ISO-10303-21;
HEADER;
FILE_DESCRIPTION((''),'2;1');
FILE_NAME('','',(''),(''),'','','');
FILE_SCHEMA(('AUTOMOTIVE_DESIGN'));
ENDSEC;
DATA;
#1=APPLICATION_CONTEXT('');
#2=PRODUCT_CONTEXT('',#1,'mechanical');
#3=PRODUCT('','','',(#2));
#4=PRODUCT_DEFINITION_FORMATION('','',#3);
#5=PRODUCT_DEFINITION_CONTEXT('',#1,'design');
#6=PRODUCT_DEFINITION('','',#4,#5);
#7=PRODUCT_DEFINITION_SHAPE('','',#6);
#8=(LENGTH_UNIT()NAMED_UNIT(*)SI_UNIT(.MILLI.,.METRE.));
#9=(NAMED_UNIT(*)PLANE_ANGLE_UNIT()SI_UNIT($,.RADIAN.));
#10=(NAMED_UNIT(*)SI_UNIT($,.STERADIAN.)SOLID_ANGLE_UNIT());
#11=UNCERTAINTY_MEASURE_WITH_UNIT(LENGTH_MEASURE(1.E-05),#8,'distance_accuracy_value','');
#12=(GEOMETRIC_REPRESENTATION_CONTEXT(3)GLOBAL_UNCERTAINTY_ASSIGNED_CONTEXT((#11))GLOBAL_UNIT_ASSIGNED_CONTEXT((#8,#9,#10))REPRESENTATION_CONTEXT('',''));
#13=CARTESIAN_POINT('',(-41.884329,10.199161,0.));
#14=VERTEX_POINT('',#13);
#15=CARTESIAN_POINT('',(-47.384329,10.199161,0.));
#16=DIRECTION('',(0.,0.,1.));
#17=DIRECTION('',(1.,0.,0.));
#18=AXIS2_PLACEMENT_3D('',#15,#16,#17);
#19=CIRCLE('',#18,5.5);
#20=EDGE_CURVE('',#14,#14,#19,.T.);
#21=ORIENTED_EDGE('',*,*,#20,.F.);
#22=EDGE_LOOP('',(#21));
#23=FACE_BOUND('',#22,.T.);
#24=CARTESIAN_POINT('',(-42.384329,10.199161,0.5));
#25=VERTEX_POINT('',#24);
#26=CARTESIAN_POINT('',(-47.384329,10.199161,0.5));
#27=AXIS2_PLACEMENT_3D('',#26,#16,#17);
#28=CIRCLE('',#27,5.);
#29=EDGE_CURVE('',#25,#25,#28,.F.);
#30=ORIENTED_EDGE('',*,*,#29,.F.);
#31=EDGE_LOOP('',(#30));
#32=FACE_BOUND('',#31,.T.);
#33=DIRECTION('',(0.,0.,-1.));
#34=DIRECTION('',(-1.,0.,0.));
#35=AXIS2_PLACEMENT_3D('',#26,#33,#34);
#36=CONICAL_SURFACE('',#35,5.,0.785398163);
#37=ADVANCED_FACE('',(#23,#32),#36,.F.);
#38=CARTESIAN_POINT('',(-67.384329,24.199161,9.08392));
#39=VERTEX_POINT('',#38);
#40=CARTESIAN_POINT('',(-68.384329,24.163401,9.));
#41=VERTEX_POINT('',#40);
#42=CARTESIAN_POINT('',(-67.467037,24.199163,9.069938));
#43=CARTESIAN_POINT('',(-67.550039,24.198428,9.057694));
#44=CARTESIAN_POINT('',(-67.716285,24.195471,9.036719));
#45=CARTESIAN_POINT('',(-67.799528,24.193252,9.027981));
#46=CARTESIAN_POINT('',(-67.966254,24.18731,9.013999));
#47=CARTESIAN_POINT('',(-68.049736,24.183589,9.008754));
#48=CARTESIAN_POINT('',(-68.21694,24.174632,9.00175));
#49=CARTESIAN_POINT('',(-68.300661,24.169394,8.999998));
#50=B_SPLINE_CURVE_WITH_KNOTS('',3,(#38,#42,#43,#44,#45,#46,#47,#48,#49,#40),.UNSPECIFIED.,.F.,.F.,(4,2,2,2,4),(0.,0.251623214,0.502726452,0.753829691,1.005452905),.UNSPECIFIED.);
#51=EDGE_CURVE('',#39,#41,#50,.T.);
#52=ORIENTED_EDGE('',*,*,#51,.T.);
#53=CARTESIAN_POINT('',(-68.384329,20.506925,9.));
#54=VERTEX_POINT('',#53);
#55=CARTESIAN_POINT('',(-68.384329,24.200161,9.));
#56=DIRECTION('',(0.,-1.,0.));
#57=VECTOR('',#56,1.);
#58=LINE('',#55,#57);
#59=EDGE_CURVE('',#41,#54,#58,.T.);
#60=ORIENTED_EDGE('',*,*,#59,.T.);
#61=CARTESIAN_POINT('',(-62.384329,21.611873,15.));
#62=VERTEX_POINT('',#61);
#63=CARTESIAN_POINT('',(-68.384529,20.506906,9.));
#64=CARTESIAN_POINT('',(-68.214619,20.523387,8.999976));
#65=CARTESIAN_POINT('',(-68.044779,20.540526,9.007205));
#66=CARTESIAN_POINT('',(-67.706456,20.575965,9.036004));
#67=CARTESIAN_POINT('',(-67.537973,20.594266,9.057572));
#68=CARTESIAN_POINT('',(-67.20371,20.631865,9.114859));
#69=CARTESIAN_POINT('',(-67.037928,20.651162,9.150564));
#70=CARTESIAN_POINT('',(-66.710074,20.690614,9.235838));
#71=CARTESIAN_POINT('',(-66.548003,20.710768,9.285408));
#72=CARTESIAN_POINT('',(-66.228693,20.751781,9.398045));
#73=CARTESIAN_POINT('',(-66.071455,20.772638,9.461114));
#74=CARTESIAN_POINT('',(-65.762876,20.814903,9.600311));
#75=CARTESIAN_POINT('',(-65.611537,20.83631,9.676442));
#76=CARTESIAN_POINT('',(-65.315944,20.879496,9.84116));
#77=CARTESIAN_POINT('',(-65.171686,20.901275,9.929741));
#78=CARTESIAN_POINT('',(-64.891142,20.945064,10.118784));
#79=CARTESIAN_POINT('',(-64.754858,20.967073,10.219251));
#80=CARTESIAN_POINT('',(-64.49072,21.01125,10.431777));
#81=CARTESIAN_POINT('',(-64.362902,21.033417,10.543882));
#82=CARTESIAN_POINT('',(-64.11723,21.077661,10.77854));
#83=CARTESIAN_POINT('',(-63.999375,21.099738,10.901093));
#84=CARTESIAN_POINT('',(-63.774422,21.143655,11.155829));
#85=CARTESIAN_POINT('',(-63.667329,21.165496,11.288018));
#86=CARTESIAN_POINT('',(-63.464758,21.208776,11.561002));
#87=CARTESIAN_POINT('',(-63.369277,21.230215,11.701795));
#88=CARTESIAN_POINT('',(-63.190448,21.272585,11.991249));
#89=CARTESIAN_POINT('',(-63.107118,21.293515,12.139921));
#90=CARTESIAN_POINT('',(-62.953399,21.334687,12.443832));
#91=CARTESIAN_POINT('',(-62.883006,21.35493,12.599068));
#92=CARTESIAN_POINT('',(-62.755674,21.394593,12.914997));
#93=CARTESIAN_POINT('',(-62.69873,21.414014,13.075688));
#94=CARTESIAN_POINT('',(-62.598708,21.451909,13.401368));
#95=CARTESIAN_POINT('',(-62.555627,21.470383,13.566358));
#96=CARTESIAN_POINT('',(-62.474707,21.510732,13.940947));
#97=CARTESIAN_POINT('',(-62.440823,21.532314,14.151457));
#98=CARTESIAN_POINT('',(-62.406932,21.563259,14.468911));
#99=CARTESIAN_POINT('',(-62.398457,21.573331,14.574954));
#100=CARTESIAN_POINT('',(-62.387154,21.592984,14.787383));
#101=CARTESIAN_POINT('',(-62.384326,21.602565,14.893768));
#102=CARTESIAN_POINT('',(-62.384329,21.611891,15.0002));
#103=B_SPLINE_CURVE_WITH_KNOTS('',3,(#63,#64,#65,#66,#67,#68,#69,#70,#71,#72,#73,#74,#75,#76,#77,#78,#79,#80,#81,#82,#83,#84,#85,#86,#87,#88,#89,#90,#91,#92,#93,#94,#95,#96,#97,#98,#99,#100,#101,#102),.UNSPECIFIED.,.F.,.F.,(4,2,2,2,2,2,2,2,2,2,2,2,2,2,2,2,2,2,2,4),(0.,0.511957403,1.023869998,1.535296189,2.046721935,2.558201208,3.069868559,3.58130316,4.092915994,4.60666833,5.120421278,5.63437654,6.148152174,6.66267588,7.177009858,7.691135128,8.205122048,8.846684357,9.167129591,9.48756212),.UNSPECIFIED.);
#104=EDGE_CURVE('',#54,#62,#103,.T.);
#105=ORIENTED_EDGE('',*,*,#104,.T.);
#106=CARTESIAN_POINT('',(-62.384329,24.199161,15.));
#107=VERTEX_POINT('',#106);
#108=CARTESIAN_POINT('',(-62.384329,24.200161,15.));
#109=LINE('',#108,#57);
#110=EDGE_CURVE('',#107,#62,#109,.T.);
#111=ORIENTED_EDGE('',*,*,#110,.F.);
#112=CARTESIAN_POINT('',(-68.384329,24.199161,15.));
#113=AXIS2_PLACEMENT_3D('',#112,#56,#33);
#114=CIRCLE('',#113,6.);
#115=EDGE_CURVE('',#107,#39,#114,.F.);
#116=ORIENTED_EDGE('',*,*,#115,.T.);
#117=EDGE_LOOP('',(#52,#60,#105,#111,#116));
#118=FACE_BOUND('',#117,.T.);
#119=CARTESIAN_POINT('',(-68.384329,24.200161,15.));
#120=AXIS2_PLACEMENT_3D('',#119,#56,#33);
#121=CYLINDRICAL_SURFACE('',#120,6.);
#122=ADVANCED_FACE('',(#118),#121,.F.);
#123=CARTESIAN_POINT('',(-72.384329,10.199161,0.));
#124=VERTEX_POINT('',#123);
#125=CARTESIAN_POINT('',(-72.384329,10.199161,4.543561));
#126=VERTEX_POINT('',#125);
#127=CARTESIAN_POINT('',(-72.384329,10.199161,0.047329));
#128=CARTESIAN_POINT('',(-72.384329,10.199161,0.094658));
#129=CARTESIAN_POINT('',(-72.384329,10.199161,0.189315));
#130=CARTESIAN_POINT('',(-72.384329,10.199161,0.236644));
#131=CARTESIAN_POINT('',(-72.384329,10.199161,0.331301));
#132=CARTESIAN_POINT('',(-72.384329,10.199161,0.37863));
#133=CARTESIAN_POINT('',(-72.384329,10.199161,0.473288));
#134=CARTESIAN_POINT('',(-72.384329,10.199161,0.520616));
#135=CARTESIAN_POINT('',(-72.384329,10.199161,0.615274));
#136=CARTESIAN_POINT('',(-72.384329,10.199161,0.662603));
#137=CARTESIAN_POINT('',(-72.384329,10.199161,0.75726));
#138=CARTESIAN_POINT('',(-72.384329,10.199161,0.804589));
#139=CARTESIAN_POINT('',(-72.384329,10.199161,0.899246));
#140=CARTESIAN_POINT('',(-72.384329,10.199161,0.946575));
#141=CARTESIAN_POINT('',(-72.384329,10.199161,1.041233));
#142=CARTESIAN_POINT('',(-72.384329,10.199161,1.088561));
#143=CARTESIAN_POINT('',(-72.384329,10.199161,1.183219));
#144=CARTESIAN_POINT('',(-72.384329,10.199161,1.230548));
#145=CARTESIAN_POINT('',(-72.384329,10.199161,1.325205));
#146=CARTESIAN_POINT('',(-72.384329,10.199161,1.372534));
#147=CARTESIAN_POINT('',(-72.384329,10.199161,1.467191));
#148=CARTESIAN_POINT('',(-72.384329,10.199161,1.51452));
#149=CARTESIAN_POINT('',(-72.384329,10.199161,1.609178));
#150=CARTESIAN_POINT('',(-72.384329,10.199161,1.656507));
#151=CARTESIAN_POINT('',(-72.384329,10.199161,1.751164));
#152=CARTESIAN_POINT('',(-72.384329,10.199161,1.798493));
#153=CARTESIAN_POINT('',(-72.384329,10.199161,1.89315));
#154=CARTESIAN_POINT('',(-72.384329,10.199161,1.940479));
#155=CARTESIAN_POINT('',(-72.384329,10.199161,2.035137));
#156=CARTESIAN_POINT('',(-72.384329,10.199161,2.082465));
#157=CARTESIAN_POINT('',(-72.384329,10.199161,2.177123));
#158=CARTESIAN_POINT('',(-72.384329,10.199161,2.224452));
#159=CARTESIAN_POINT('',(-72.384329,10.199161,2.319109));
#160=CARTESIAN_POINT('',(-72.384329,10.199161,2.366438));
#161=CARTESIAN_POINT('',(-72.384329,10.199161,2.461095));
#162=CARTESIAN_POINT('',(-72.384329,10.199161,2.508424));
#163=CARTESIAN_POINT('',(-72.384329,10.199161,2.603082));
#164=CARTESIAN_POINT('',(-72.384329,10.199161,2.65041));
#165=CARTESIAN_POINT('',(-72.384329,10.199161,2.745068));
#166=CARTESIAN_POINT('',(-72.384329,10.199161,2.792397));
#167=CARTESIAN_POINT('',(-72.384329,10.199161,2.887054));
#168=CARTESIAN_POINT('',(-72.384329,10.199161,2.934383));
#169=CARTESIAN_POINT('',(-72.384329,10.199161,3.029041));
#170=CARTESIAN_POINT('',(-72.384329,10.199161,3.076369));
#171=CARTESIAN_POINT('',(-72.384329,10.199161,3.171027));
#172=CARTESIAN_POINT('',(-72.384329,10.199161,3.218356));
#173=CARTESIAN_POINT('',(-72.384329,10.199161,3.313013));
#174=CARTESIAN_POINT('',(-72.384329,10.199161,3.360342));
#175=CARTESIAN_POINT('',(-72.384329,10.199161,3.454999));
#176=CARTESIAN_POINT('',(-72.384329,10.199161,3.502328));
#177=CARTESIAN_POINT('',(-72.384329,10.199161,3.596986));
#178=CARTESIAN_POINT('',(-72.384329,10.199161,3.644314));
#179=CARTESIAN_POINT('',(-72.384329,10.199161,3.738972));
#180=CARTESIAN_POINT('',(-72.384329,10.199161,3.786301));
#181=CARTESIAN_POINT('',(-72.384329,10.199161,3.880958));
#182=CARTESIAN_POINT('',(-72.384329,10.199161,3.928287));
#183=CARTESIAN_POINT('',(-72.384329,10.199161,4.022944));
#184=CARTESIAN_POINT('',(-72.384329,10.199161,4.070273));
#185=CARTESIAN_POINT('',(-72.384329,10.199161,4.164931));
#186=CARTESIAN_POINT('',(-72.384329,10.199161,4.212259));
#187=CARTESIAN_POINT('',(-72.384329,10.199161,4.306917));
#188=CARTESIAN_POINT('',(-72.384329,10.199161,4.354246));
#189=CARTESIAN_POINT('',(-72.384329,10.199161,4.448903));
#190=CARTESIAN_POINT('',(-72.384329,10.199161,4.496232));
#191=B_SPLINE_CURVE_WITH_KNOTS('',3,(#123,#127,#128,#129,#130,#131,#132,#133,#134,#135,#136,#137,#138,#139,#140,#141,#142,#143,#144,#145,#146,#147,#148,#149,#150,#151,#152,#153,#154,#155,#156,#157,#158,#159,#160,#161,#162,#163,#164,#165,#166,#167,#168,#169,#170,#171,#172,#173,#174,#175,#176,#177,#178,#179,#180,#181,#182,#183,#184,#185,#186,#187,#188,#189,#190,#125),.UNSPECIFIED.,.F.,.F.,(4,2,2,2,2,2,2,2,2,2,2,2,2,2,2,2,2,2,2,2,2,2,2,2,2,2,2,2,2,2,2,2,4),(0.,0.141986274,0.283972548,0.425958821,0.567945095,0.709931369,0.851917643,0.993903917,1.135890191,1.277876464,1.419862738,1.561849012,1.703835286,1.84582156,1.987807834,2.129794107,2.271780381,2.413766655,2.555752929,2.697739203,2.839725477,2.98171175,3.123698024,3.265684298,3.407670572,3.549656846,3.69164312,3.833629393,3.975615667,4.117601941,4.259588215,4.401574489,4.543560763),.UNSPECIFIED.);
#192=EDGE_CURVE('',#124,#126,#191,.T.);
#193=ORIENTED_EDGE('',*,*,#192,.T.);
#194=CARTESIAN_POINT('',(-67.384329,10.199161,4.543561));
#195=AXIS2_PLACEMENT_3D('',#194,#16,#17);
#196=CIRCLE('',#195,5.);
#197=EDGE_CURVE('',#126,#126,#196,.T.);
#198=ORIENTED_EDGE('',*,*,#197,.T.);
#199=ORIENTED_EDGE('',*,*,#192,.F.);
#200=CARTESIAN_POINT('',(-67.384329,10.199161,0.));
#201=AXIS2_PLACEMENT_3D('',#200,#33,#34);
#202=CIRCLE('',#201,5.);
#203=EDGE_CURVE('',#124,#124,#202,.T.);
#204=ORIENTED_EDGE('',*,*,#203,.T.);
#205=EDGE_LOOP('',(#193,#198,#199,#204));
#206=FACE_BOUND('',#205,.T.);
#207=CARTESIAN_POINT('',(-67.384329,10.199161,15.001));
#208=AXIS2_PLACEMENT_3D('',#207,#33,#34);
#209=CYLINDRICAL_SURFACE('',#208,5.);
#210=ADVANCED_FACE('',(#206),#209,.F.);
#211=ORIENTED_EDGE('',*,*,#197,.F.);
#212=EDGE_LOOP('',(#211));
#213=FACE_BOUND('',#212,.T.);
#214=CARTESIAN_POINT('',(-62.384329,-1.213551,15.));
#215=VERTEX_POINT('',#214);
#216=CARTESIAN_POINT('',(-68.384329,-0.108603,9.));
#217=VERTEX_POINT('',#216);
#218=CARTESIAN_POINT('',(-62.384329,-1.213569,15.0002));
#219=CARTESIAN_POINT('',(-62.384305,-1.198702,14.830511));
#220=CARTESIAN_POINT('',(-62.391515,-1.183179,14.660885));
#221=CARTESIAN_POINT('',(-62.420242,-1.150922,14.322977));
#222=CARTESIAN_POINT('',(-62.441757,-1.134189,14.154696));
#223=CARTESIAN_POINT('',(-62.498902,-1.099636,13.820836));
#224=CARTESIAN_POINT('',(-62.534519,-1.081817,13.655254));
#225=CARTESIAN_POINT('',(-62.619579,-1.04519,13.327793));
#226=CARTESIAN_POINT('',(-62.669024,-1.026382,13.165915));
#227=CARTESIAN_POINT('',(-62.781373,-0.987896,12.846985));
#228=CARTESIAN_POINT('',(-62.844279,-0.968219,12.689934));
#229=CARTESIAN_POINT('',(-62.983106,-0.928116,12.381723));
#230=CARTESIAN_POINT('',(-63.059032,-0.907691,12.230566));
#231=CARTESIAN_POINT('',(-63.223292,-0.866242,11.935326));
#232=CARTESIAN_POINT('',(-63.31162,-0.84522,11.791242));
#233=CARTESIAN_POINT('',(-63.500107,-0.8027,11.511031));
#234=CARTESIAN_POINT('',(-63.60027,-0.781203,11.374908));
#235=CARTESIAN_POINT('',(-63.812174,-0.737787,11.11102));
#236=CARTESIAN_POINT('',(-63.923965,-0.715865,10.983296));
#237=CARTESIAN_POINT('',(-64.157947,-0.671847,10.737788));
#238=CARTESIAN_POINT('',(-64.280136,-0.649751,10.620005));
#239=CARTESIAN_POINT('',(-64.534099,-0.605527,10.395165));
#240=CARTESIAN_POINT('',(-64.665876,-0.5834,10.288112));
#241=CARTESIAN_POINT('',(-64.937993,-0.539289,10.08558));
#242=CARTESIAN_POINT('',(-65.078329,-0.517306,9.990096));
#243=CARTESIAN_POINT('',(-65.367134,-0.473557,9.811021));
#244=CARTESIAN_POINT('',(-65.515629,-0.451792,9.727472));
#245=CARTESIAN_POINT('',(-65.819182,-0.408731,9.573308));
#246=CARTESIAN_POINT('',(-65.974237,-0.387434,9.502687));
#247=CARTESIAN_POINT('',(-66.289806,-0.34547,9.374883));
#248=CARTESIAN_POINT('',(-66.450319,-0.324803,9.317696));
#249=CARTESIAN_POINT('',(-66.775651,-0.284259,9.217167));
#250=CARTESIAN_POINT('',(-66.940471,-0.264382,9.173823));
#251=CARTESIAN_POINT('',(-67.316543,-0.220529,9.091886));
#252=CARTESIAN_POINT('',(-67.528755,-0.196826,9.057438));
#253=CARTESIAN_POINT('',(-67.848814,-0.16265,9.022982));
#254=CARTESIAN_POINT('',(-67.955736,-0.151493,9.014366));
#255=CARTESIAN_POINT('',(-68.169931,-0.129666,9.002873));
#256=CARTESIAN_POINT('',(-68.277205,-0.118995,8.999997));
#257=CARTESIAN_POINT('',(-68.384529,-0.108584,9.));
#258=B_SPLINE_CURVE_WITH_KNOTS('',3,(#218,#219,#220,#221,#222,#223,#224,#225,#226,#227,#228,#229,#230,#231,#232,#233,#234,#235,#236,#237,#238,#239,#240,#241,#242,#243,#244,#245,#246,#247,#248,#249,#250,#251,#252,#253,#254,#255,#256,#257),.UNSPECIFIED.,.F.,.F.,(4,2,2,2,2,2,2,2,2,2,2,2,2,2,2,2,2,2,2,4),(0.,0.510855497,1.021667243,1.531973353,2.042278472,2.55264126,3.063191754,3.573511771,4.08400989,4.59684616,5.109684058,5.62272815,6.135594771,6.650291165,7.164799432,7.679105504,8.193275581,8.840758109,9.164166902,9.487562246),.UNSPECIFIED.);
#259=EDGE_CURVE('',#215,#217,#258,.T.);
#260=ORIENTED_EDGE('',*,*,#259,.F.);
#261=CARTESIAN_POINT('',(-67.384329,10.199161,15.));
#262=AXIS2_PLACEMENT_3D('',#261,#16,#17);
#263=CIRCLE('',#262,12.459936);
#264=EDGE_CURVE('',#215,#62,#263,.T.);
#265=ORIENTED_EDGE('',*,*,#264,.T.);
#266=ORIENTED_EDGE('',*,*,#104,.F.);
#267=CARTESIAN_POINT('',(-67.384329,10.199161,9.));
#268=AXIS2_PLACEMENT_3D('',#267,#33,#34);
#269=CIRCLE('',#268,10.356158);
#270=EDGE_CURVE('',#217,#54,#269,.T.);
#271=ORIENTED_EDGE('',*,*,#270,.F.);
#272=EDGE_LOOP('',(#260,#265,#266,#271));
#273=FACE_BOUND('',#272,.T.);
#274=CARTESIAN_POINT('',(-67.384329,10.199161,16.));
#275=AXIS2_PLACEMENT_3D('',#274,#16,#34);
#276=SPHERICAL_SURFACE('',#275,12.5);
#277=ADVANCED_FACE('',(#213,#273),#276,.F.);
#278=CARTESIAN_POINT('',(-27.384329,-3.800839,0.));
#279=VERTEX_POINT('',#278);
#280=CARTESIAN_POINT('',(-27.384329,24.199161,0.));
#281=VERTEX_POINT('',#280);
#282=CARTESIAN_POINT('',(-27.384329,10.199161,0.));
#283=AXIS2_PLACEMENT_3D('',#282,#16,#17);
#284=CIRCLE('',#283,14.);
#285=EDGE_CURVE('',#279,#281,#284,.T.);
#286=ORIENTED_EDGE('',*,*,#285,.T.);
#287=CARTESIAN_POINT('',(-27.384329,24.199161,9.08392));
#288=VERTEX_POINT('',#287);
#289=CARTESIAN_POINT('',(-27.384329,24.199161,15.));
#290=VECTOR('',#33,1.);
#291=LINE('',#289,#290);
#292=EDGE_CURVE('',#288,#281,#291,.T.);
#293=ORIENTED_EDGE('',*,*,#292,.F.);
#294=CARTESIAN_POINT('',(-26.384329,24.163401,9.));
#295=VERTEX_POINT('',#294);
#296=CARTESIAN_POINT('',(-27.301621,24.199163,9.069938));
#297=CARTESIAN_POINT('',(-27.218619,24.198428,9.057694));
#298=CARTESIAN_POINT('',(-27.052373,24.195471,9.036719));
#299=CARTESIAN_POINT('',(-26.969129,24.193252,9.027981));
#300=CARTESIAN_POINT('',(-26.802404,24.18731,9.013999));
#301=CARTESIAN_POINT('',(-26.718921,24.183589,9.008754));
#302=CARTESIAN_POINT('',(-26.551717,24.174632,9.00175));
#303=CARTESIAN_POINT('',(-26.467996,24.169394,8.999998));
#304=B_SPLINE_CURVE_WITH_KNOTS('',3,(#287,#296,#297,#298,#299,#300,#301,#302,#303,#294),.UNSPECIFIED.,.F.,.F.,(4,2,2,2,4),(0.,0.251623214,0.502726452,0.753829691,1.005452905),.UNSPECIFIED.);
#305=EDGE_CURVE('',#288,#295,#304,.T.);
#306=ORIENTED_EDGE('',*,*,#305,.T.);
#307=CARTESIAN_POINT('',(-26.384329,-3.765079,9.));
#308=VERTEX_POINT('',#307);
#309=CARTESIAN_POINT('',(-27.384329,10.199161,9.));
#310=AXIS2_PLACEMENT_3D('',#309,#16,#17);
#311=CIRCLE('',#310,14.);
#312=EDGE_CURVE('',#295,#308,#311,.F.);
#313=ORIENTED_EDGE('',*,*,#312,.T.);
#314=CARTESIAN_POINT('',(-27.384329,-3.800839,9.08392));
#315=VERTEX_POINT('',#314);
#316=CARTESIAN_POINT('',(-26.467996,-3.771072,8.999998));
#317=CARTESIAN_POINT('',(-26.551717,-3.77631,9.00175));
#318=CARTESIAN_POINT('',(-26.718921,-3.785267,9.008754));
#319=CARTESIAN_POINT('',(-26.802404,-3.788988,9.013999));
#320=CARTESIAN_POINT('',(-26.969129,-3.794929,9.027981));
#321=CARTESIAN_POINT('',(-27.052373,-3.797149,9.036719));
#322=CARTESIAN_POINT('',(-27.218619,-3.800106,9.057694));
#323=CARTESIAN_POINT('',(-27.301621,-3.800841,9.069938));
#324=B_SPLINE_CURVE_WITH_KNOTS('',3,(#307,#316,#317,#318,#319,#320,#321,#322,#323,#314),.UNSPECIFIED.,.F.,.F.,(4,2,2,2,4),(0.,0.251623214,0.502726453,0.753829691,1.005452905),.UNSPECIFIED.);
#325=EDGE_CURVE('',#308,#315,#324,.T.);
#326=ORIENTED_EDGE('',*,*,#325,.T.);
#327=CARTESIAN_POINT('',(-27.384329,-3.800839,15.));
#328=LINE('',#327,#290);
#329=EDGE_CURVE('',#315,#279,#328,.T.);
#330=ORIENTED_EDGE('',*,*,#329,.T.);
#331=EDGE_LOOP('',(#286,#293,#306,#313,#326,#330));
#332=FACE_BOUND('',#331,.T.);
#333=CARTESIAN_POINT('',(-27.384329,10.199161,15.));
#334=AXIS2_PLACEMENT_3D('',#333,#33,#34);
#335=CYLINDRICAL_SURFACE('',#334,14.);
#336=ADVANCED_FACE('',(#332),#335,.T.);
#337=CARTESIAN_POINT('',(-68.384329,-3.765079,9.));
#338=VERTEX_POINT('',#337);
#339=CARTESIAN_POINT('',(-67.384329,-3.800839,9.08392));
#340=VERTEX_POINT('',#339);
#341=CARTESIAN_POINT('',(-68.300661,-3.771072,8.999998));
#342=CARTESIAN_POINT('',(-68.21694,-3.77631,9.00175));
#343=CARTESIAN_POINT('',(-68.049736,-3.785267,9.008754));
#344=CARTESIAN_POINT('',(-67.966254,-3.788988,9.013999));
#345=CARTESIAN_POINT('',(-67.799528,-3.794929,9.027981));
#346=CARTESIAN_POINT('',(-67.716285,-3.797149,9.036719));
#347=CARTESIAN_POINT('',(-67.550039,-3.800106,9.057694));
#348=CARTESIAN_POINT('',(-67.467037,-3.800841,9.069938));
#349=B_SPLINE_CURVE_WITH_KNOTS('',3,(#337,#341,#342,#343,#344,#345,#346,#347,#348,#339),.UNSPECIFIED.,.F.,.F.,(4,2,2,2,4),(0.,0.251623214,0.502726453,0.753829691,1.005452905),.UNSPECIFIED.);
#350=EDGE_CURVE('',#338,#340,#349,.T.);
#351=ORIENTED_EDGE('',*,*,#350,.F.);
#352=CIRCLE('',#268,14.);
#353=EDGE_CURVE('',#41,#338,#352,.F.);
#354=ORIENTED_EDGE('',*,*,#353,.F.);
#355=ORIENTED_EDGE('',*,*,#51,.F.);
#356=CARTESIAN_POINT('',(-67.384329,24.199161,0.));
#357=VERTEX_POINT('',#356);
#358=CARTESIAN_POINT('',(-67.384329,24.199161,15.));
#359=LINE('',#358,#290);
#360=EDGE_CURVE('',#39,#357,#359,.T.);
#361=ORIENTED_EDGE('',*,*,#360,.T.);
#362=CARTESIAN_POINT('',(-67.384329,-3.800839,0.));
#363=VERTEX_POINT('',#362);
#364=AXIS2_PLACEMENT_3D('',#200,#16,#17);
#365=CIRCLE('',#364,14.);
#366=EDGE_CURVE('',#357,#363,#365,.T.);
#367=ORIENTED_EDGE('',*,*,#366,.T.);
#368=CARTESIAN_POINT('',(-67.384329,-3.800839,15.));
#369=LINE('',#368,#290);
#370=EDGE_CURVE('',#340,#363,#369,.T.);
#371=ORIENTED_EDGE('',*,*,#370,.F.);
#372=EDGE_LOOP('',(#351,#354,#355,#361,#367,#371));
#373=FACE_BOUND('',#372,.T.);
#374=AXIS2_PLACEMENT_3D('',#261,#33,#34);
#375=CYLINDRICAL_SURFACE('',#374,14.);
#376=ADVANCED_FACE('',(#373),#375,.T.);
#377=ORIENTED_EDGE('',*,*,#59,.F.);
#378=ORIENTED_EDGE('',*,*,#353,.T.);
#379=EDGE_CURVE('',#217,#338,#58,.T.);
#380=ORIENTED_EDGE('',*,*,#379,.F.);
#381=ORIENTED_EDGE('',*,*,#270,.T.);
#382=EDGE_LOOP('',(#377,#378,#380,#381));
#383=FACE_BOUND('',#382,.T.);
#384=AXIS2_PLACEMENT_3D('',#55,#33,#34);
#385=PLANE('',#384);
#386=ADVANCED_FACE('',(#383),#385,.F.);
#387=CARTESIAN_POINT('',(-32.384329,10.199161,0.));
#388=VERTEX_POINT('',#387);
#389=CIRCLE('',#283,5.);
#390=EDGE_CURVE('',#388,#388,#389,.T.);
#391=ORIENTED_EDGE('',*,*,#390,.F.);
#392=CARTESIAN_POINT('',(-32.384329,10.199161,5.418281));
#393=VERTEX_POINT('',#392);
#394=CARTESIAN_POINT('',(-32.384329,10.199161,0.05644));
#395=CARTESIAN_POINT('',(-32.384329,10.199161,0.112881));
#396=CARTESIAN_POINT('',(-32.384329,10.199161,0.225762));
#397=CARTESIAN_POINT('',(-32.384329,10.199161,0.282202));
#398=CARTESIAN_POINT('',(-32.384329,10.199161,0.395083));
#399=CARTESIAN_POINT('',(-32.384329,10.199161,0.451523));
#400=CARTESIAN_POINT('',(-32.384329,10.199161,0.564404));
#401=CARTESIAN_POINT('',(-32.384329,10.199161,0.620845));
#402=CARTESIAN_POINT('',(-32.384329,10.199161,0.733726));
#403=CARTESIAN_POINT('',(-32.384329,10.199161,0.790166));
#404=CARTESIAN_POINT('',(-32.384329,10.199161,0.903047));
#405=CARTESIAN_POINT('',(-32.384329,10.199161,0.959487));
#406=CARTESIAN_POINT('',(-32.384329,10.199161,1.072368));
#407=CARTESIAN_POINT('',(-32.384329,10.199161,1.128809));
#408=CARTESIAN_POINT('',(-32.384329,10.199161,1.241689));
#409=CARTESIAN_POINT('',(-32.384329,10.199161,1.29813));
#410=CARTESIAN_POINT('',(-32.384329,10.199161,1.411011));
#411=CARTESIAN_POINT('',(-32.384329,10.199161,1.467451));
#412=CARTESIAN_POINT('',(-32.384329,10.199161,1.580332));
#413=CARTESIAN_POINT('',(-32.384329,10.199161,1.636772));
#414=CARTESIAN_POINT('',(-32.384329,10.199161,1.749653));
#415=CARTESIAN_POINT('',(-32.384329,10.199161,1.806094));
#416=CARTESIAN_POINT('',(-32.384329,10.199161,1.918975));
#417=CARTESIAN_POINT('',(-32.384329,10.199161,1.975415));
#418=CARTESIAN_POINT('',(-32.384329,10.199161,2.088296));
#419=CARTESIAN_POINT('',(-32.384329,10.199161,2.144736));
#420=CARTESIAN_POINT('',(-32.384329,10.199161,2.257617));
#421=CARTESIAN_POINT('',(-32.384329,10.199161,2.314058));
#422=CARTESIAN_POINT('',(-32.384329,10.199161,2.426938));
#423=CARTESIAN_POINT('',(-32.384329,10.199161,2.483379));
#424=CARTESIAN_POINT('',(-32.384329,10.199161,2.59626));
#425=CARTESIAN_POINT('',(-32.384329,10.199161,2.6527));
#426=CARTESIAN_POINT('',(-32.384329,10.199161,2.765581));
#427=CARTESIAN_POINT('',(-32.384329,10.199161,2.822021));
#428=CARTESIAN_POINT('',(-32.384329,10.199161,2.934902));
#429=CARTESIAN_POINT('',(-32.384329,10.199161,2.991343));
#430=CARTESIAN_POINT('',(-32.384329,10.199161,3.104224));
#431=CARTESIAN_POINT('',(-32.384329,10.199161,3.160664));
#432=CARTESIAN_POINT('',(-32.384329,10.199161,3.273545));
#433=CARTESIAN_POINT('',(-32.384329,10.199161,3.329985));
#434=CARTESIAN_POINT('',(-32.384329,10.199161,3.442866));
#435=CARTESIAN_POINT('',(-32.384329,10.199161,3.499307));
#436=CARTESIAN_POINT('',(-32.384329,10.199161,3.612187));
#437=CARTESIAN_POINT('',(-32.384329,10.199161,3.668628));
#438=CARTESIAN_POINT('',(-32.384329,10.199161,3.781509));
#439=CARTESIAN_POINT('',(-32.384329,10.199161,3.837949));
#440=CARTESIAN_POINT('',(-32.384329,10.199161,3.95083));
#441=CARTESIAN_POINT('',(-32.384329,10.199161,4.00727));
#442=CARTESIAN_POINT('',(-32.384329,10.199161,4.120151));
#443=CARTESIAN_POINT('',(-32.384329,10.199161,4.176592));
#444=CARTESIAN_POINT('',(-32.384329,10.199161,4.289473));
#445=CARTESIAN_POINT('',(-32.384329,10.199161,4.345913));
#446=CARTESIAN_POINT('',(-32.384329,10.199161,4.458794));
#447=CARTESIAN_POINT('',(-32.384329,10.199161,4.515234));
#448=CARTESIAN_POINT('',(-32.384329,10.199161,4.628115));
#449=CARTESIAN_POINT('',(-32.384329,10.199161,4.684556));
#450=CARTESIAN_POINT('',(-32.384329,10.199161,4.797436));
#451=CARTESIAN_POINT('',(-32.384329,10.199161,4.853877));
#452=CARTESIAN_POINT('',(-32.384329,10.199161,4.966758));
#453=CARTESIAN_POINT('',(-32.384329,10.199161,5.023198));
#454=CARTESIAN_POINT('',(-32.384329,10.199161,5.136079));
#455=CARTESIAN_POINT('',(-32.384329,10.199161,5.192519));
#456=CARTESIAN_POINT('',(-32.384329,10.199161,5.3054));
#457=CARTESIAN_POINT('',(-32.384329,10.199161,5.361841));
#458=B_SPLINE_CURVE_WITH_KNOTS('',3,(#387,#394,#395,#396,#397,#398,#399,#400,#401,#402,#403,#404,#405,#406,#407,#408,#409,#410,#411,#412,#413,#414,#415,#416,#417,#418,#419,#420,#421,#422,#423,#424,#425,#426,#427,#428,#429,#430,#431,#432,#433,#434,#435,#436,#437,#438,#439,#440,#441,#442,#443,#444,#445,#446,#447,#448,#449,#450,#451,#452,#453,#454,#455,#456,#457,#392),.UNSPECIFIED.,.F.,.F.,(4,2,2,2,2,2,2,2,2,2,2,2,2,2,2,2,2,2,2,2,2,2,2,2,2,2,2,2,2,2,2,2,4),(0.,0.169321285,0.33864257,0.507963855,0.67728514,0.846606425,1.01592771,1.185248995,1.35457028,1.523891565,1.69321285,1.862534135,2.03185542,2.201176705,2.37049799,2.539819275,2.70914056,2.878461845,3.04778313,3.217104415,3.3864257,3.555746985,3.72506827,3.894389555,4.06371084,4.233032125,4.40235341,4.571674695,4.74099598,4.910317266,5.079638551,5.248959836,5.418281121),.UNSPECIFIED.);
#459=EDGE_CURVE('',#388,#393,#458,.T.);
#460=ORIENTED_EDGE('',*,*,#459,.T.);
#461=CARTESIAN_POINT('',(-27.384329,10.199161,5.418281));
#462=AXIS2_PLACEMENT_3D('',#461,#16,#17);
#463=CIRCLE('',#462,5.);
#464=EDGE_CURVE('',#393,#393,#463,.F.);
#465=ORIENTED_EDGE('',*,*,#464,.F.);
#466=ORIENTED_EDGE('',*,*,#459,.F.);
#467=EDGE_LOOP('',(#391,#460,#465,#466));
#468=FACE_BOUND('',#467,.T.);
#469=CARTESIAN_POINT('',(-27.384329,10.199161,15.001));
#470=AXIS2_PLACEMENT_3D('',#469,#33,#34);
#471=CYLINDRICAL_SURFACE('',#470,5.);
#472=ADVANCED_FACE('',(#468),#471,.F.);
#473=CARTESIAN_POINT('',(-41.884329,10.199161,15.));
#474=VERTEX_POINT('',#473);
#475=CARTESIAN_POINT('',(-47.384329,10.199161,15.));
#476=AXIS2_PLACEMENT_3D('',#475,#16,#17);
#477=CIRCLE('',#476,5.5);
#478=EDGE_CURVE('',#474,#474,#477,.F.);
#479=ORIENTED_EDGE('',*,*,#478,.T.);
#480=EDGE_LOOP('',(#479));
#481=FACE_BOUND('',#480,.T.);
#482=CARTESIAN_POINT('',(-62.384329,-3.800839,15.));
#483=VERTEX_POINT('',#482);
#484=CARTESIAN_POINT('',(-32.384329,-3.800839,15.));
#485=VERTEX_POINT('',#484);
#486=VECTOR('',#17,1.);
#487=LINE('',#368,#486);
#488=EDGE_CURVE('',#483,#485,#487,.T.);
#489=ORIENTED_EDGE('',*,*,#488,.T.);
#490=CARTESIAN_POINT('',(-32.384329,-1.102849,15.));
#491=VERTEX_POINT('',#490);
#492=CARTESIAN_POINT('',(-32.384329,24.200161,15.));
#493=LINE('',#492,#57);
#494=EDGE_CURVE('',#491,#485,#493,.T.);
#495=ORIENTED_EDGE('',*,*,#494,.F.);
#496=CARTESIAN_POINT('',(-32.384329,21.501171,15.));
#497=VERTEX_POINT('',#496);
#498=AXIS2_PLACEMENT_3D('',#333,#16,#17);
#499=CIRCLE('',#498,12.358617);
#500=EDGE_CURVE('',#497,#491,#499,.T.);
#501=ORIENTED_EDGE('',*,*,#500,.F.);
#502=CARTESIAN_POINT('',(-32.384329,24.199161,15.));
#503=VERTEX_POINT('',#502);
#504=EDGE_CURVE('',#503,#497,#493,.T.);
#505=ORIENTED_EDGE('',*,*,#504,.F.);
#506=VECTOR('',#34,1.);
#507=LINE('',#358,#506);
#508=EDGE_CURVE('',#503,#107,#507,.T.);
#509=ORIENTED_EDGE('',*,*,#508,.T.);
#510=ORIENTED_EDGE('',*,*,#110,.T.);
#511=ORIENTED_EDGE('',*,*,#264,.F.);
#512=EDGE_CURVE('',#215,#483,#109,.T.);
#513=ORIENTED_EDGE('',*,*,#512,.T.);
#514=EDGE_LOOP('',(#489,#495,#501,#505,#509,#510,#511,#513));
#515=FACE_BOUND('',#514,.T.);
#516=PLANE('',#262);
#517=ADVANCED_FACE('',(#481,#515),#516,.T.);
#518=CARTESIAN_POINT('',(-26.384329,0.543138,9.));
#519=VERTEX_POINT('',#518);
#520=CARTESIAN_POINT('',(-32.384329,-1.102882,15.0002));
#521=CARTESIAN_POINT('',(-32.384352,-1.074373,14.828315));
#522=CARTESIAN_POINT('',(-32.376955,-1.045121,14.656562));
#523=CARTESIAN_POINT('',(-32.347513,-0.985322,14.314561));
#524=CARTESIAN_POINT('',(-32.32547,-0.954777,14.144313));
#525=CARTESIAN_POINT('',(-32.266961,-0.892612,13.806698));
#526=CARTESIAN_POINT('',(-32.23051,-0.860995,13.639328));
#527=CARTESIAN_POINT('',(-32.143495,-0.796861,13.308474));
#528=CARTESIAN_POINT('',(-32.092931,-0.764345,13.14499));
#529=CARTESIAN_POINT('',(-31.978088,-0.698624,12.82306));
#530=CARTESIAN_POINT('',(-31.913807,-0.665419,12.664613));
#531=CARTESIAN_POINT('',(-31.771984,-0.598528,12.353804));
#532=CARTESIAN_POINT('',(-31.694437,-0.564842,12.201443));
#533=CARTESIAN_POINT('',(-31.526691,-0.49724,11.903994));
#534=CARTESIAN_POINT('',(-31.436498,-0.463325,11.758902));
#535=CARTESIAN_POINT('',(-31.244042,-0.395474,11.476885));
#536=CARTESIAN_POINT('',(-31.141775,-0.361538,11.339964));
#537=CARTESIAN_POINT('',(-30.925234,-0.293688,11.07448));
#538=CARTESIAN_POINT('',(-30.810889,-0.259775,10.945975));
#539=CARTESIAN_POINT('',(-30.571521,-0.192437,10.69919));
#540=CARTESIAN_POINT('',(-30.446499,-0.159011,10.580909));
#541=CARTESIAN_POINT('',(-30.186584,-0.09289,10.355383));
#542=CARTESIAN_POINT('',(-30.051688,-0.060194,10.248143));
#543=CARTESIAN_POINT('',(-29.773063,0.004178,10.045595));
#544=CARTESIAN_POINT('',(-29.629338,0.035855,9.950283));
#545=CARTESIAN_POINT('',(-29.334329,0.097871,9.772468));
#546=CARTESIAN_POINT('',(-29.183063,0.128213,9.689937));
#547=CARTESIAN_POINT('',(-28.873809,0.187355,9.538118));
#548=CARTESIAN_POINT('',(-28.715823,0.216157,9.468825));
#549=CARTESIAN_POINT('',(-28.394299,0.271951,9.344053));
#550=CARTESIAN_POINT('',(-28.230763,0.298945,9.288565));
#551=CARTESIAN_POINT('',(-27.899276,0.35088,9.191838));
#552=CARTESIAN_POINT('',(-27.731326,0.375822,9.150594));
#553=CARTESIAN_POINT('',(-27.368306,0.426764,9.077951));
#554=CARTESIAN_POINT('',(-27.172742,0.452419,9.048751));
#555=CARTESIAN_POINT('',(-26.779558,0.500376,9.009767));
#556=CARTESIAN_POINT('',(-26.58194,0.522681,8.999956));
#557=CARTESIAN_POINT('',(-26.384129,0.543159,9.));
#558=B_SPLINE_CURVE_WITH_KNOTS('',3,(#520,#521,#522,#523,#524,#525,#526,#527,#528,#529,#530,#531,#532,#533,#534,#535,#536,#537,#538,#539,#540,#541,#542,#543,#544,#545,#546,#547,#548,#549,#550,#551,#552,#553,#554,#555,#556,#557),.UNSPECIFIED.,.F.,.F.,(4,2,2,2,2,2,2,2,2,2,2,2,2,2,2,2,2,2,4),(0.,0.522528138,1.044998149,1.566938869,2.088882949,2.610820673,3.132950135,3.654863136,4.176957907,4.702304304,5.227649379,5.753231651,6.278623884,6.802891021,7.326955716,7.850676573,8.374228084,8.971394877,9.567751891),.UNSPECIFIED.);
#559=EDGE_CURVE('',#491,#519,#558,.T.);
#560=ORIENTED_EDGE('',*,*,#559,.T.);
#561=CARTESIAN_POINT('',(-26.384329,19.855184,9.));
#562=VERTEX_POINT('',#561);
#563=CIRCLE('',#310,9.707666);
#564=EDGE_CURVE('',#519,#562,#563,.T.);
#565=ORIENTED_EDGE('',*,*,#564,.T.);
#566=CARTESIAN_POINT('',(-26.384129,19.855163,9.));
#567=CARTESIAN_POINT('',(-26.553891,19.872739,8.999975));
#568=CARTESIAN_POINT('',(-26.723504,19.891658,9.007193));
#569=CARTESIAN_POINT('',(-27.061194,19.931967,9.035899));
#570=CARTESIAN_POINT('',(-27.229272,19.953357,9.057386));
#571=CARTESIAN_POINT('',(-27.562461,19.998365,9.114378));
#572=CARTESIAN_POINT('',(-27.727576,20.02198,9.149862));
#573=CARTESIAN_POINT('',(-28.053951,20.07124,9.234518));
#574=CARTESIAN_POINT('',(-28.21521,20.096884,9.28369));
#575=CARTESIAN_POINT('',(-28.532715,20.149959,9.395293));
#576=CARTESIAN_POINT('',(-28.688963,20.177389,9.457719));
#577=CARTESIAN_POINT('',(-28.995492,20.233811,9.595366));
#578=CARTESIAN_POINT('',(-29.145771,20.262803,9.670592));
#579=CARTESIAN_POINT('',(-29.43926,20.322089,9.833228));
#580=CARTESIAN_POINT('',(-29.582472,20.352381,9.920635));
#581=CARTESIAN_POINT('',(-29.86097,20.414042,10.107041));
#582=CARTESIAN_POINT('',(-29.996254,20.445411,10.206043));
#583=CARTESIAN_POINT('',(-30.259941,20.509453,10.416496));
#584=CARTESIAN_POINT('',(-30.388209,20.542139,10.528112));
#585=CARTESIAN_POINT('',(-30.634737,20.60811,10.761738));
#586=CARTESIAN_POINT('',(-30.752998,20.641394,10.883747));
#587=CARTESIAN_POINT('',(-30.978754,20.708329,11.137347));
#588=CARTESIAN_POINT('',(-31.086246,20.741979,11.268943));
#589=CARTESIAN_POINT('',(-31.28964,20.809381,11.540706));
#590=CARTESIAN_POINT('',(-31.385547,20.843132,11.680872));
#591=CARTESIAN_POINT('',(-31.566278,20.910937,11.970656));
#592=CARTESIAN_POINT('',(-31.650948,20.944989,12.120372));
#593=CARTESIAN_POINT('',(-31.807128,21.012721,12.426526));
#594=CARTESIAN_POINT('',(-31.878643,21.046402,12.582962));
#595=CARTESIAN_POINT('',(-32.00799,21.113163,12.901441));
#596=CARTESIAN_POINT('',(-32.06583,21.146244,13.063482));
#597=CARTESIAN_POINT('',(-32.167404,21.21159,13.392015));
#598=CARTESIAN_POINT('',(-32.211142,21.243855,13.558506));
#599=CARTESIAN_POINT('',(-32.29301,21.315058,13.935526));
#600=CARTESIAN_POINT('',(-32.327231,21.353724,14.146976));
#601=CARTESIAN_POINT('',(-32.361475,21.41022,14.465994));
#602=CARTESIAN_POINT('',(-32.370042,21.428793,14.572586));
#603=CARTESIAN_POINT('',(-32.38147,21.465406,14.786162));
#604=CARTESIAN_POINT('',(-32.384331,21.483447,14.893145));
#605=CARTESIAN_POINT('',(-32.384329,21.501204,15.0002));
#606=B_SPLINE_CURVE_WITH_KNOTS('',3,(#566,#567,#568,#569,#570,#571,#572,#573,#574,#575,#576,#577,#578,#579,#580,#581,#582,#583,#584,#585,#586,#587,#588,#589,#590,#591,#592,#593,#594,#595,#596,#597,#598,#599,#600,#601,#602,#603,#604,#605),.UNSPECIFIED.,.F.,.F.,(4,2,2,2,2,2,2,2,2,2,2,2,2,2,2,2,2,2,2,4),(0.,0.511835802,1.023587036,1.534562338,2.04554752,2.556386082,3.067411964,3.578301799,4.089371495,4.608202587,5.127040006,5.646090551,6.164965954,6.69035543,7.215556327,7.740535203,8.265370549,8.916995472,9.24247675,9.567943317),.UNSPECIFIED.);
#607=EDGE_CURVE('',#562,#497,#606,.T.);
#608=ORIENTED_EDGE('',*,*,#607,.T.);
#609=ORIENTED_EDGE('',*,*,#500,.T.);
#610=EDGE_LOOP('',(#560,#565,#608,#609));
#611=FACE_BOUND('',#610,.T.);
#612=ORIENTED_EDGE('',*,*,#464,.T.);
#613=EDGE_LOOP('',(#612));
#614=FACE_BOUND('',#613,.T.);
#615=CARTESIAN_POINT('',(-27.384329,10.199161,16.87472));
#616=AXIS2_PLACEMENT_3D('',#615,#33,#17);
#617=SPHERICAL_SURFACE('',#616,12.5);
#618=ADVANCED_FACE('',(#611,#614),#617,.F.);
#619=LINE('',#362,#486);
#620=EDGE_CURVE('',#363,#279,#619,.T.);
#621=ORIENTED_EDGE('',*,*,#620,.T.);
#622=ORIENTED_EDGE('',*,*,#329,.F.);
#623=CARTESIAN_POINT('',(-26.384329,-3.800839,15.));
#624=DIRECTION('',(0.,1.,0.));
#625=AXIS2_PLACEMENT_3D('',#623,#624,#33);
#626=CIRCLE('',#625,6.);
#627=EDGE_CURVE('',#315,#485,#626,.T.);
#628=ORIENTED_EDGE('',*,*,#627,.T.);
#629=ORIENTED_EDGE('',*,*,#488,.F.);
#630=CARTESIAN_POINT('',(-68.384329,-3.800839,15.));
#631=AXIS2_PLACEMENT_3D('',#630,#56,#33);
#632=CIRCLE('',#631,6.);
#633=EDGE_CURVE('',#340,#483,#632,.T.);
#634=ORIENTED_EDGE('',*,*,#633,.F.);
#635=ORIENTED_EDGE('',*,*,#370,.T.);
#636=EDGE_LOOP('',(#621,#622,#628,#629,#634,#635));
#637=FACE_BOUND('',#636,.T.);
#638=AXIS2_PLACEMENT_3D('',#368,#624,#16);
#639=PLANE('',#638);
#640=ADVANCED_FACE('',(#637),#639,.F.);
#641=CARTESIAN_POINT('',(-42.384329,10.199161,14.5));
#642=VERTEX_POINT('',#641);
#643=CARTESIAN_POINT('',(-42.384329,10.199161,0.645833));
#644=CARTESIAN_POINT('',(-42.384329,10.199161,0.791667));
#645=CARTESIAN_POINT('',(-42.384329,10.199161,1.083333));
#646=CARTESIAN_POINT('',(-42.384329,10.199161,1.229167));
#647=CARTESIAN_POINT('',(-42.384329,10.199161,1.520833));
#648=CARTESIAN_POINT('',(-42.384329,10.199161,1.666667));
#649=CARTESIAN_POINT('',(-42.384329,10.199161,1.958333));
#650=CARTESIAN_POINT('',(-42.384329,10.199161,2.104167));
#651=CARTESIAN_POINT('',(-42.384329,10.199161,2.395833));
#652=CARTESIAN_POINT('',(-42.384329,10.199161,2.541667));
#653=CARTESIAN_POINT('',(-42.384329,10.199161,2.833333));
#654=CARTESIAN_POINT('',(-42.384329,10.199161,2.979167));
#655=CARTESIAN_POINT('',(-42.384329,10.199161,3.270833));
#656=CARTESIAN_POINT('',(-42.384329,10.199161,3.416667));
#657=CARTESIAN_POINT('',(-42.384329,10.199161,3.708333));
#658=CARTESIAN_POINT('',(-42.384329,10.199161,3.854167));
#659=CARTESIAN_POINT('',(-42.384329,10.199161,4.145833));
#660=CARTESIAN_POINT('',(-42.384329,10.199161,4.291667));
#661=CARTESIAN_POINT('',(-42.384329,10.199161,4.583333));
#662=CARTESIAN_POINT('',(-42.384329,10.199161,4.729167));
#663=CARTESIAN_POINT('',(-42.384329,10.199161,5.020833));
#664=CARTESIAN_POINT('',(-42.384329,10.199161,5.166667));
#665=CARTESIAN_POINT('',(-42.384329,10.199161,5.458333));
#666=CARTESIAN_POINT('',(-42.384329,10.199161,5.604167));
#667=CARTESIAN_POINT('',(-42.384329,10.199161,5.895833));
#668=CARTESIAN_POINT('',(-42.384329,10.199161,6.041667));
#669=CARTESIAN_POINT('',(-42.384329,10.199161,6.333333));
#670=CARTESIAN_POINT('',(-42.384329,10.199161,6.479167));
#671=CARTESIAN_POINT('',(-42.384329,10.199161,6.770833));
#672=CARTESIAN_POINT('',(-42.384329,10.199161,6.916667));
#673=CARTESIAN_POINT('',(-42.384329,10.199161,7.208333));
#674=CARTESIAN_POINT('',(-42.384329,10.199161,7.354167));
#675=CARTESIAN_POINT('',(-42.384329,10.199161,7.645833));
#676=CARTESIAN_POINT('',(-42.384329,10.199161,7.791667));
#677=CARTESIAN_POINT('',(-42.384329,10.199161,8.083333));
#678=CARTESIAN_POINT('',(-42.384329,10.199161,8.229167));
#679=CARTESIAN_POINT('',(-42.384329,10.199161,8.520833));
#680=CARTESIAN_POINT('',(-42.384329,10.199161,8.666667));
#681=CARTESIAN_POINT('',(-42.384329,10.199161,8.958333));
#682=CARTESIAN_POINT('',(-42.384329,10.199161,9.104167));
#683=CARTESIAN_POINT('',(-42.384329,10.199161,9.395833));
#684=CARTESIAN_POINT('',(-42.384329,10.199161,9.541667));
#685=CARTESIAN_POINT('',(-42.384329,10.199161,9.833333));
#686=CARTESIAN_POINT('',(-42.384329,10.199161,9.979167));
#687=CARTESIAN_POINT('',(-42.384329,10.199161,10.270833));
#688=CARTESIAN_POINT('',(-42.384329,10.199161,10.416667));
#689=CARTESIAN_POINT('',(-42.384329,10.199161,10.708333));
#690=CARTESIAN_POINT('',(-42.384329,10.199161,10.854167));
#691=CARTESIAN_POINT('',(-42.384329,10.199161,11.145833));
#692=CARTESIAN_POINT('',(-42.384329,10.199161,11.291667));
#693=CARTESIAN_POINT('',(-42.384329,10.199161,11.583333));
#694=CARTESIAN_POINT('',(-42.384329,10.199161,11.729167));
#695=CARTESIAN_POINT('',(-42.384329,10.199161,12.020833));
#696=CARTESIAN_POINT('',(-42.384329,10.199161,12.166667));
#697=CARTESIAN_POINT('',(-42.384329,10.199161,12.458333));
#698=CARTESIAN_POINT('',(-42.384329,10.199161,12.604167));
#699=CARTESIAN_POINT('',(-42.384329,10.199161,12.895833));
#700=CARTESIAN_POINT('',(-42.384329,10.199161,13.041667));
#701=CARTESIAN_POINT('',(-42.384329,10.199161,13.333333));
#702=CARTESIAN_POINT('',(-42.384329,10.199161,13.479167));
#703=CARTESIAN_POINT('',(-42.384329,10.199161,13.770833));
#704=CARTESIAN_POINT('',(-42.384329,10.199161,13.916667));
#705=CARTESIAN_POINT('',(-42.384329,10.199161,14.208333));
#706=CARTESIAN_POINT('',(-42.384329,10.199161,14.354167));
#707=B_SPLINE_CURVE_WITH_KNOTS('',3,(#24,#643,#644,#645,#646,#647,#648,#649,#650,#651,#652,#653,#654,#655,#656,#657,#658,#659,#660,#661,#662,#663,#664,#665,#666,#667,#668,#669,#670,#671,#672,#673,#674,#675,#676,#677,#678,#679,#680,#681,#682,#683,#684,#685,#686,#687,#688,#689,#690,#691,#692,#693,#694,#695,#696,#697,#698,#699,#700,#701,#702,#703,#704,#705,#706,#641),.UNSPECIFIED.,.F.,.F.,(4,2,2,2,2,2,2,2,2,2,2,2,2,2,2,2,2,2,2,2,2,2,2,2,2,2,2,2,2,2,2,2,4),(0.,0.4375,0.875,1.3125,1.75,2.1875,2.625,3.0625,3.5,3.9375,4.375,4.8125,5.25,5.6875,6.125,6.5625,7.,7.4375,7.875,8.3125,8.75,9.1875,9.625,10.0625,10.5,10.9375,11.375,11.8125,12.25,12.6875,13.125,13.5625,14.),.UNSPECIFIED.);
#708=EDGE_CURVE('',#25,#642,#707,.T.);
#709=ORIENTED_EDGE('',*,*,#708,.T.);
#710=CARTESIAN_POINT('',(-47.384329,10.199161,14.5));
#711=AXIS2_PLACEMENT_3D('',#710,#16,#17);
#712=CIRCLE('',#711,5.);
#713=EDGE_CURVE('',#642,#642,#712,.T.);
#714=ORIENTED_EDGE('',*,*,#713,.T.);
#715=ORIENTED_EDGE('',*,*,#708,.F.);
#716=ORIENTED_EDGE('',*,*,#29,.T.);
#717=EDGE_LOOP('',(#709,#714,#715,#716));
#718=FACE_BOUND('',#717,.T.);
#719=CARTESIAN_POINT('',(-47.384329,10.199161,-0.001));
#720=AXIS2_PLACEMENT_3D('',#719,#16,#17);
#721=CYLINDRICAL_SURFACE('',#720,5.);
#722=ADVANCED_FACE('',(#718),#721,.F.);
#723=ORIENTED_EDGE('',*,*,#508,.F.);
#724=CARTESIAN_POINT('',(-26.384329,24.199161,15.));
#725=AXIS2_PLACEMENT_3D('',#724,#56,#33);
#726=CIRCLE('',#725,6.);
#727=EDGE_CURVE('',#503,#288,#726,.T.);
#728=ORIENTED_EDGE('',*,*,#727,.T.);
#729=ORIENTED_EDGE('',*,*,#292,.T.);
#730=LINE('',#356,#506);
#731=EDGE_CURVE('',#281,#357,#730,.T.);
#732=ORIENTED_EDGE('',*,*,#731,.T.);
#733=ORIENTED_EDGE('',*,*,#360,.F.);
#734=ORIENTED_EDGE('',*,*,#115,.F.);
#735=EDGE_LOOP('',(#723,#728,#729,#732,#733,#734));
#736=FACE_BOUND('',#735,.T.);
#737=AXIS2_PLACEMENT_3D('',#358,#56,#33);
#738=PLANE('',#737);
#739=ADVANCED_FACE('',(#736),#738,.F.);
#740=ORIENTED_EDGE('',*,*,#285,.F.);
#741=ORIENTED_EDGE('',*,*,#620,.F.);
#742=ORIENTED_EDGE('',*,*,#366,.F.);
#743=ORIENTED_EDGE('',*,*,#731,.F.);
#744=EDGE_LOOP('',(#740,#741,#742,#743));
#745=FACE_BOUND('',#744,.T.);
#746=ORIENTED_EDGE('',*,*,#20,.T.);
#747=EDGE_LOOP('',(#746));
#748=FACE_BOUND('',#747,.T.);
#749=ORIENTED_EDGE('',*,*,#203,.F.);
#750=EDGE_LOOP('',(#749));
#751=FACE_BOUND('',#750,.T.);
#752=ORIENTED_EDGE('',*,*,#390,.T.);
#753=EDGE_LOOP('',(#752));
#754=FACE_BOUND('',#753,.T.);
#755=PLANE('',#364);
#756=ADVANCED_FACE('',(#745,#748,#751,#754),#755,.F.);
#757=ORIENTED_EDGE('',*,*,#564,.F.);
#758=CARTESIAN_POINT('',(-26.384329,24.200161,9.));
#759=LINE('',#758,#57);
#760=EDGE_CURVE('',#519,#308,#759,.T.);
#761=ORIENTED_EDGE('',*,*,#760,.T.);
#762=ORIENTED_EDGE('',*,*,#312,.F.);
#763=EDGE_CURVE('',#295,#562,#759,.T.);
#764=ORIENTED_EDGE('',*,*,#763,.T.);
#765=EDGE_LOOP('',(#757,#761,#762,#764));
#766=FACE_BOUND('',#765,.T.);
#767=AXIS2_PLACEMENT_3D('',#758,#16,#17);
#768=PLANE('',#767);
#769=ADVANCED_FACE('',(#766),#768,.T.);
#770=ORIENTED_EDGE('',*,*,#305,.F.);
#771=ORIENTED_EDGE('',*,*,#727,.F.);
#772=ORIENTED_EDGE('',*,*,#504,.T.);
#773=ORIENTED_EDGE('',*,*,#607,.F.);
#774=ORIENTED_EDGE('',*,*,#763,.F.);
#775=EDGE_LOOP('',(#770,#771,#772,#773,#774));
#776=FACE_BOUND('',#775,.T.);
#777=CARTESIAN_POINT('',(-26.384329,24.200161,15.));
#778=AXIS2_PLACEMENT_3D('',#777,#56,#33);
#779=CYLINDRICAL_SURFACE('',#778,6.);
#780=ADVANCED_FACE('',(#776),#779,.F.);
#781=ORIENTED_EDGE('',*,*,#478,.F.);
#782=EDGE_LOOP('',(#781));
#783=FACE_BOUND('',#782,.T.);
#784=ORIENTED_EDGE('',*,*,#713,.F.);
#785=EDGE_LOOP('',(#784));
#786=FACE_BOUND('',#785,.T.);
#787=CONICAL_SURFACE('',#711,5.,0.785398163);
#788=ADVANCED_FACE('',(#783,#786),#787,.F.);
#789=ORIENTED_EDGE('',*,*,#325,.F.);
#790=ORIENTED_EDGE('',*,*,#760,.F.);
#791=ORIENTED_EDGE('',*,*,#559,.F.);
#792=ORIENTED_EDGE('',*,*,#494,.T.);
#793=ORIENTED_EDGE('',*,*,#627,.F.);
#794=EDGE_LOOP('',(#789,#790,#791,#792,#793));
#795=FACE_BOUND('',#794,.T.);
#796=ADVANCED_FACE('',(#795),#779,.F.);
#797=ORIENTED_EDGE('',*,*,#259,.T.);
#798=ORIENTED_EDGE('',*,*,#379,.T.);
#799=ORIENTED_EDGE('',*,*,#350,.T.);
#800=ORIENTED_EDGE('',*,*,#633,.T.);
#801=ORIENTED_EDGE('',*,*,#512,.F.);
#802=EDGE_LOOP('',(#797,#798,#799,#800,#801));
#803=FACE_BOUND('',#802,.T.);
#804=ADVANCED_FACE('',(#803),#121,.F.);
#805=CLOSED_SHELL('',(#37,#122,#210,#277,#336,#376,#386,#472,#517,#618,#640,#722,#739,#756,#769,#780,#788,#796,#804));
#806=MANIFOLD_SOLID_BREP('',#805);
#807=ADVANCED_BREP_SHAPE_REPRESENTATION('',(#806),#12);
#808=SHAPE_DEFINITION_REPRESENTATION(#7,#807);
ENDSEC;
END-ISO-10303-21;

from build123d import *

# Parameters (mm, degrees)
BOSS_EXTRU_1_DEPTH           = 15
ENL_V_MAT_EXTRU_2_REACH      = 89.364
ENL_V_MAT_EXTRU_3_REACH      = 88.221
ESQUISSE8_R                  = 5
CHANFREIN1_SIZE              = 0.5
ENL_V_MAT_EXTRU_4_REACH      = 88.221
ENL_V_MAT_EXTRU_4_END_RADIUS = 12.5
ESQUISSE9_R                  = 5
SYM_TRIE2_OUTLINE_R          = 5
SYM_TRIE2_DEPTH              = 5.418281221


# Read off the part's stored shape, not the designer's step: Symétrie2
with BuildPart() as part:
    # Esquisse1 → Boss.-Extru.1 (new body)
    with BuildSketch(Plane.XY):
        with BuildLine():
            Line((-67.384328638, 24.199161074), (-27.384328638, 24.199161074))
            ThreePointArc((-27.384328638, 24.199161074), (-13.384328638, 10.199161074), (-27.384328638, -3.800838926))
            Line((-27.384328638, -3.800838926), (-67.384328638, -3.800838926))
            ThreePointArc((-67.384328638, -3.800838926), (-81.384328638, 10.199161074), (-67.384328638, 24.199161074))
        make_face()
    extrude(amount=BOSS_EXTRU_1_DEPTH)

    # Esquisse3 → Enlèvement de matière-Révolution1 (revolve, cut)
    with BuildSketch(Plane(origin=(0, 10.199161074, 0), x_dir=(-1, 0, 0), z_dir=(0, 1, 0))):
        with BuildLine():
            Line((67.384328638, 28.5), (67.384328638, 3.5))
            ThreePointArc((67.384328638, 3.5), (54.884328638, 16), (67.384328638, 28.5))
        make_face()
    revolve(axis=Axis((-67.384328638, 10.199161074, 28.5), (0, 0, -1)), mode=Mode.SUBTRACT)

    # Esquisse4 → Enlèvement de matière-Révolution2 (revolve, cut)
    with BuildSketch(Plane(origin=(0, 10.199161074, 0), x_dir=(-1, 0, 0), z_dir=(0, 1, 0))):
        with BuildLine():
            Line((27.384328638, 4.374720358), (27.384328638, 29.374720358))
            ThreePointArc((27.384328638, 29.374720358), (39.884328638, 16.874720358), (27.384328638, 4.374720358))
        make_face()
    revolve(axis=Axis((-27.384328638, 10.199161074, 4.374720358), (0, 0, 1)), mode=Mode.SUBTRACT)

    # Esquisse5 → Enlèv. mat.-Extru.2 (cut, up to next)
    with BuildSketch(Plane.XZ.offset(3.800838926), mode=Mode.PRIVATE) as enl_v_mat_extru_2_sk1:
        with BuildLine():
            Line((-63.278251084, 15), (-87.523217527, 15))
            Line((-87.523217527, 15), (-87.523217527, 9))
            Line((-87.523217527, 9), (-68.384328638, 9))
            ThreePointArc((-68.384328638, 9), (-64.141687951, 10.757359313), (-62.384328638, 15))
            Line((-62.384328638, 15), (-63.278251084, 15))
        make_face()
    enl_v_mat_extru_2_tool1 = extrude(enl_v_mat_extru_2_sk1.sketch, amount=-ENL_V_MAT_EXTRU_2_REACH, mode=Mode.PRIVATE) & part.part
    enl_v_mat_extru_2 = enl_v_mat_extru_2_tool1.solids().sort_by_distance((-75.559983, -3.800839, 12.089604))[0]
    add(enl_v_mat_extru_2, mode=Mode.SUBTRACT)

    # Symétrie1: Enlèv. mat.-Extru.2 mirrored; each copy of Enlèv. mat.-Extru.2 runs up to whatever stops it at its own place
    sym_trie1_before = part.part  # the part as the pattern finds it: every copy runs up to it
    sym_trie1_enl_v_mat_extru_2_long = extrude(enl_v_mat_extru_2_sk1.sketch, amount=-ENL_V_MAT_EXTRU_2_REACH, mode=Mode.PRIVATE)
    sym_trie1_enl_v_mat_extru_2_tool1 = sym_trie1_enl_v_mat_extru_2_long.mirror(Plane.ZY.offset(47.384328638)) & sym_trie1_before
    add(sym_trie1_enl_v_mat_extru_2_tool1.solids().sort_by_distance((-19.208674, -3.800839, 12.089604))[0], mode=Mode.SUBTRACT)

    # Esquisse8 → Enlèv. mat.-Extru.3 (cut, up to next)
    with BuildSketch(Plane.XY.offset(15), mode=Mode.PRIVATE) as enl_v_mat_extru_3_sk1:
        with Locations((-47.384328638, 10.199161074)):
            Circle(ESQUISSE8_R)
    enl_v_mat_extru_3_tool1 = extrude(enl_v_mat_extru_3_sk1.sketch, amount=-ENL_V_MAT_EXTRU_3_REACH, mode=Mode.PRIVATE) & part.part
    add(enl_v_mat_extru_3_tool1.solids().sort_by_distance((-47.384329, 10.199161, 15))[0], mode=Mode.SUBTRACT)

    # Chanfrein1
    chanfrein1_edges = [part.edges().sort_by_distance(p)[0] for p in [
        (-52.384328638, 10.199161074, 15),
        (-52.384328638, 10.199161074, 0),
    ]]
    chamfer(chanfrein1_edges, length=CHANFREIN1_SIZE)

    # Enlèv. mat.-Extru.4: up to this sphere (the profile starts outside it)
    enl_v_mat_extru_4_end = Location((-67.384328638, 10.199161074, 16)) * Sphere(ENL_V_MAT_EXTRU_4_END_RADIUS, mode=Mode.PRIVATE)
    # Esquisse9 → Enlèv. mat.-Extru.4 (cut, up to the surface)
    with BuildSketch(Plane(origin=(0, 0, 0), x_dir=(-1, 0, 0), z_dir=(0, 0, -1)), mode=Mode.PRIVATE) as enl_v_mat_extru_4_sk1:
        with Locations((67.384328638, 10.199161074)):
            Circle(ESQUISSE9_R)
    enl_v_mat_extru_4_tool1 = extrude(enl_v_mat_extru_4_sk1.sketch, amount=-ENL_V_MAT_EXTRU_4_REACH, mode=Mode.PRIVATE) - enl_v_mat_extru_4_end
    add(enl_v_mat_extru_4_tool1.solids().sort_by_distance((-67.384329, 10.199161, 0))[0], mode=Mode.SUBTRACT)

    # Symétrie2 outline → Symétrie2 (cut)
    with BuildSketch(Plane.XY):
        with Locations((-27.384328638, 10.199161074)):
            Circle(SYM_TRIE2_OUTLINE_R)
    extrude(amount=SYM_TRIE2_DEPTH, mode=Mode.SUBTRACT)


solid = part.part
